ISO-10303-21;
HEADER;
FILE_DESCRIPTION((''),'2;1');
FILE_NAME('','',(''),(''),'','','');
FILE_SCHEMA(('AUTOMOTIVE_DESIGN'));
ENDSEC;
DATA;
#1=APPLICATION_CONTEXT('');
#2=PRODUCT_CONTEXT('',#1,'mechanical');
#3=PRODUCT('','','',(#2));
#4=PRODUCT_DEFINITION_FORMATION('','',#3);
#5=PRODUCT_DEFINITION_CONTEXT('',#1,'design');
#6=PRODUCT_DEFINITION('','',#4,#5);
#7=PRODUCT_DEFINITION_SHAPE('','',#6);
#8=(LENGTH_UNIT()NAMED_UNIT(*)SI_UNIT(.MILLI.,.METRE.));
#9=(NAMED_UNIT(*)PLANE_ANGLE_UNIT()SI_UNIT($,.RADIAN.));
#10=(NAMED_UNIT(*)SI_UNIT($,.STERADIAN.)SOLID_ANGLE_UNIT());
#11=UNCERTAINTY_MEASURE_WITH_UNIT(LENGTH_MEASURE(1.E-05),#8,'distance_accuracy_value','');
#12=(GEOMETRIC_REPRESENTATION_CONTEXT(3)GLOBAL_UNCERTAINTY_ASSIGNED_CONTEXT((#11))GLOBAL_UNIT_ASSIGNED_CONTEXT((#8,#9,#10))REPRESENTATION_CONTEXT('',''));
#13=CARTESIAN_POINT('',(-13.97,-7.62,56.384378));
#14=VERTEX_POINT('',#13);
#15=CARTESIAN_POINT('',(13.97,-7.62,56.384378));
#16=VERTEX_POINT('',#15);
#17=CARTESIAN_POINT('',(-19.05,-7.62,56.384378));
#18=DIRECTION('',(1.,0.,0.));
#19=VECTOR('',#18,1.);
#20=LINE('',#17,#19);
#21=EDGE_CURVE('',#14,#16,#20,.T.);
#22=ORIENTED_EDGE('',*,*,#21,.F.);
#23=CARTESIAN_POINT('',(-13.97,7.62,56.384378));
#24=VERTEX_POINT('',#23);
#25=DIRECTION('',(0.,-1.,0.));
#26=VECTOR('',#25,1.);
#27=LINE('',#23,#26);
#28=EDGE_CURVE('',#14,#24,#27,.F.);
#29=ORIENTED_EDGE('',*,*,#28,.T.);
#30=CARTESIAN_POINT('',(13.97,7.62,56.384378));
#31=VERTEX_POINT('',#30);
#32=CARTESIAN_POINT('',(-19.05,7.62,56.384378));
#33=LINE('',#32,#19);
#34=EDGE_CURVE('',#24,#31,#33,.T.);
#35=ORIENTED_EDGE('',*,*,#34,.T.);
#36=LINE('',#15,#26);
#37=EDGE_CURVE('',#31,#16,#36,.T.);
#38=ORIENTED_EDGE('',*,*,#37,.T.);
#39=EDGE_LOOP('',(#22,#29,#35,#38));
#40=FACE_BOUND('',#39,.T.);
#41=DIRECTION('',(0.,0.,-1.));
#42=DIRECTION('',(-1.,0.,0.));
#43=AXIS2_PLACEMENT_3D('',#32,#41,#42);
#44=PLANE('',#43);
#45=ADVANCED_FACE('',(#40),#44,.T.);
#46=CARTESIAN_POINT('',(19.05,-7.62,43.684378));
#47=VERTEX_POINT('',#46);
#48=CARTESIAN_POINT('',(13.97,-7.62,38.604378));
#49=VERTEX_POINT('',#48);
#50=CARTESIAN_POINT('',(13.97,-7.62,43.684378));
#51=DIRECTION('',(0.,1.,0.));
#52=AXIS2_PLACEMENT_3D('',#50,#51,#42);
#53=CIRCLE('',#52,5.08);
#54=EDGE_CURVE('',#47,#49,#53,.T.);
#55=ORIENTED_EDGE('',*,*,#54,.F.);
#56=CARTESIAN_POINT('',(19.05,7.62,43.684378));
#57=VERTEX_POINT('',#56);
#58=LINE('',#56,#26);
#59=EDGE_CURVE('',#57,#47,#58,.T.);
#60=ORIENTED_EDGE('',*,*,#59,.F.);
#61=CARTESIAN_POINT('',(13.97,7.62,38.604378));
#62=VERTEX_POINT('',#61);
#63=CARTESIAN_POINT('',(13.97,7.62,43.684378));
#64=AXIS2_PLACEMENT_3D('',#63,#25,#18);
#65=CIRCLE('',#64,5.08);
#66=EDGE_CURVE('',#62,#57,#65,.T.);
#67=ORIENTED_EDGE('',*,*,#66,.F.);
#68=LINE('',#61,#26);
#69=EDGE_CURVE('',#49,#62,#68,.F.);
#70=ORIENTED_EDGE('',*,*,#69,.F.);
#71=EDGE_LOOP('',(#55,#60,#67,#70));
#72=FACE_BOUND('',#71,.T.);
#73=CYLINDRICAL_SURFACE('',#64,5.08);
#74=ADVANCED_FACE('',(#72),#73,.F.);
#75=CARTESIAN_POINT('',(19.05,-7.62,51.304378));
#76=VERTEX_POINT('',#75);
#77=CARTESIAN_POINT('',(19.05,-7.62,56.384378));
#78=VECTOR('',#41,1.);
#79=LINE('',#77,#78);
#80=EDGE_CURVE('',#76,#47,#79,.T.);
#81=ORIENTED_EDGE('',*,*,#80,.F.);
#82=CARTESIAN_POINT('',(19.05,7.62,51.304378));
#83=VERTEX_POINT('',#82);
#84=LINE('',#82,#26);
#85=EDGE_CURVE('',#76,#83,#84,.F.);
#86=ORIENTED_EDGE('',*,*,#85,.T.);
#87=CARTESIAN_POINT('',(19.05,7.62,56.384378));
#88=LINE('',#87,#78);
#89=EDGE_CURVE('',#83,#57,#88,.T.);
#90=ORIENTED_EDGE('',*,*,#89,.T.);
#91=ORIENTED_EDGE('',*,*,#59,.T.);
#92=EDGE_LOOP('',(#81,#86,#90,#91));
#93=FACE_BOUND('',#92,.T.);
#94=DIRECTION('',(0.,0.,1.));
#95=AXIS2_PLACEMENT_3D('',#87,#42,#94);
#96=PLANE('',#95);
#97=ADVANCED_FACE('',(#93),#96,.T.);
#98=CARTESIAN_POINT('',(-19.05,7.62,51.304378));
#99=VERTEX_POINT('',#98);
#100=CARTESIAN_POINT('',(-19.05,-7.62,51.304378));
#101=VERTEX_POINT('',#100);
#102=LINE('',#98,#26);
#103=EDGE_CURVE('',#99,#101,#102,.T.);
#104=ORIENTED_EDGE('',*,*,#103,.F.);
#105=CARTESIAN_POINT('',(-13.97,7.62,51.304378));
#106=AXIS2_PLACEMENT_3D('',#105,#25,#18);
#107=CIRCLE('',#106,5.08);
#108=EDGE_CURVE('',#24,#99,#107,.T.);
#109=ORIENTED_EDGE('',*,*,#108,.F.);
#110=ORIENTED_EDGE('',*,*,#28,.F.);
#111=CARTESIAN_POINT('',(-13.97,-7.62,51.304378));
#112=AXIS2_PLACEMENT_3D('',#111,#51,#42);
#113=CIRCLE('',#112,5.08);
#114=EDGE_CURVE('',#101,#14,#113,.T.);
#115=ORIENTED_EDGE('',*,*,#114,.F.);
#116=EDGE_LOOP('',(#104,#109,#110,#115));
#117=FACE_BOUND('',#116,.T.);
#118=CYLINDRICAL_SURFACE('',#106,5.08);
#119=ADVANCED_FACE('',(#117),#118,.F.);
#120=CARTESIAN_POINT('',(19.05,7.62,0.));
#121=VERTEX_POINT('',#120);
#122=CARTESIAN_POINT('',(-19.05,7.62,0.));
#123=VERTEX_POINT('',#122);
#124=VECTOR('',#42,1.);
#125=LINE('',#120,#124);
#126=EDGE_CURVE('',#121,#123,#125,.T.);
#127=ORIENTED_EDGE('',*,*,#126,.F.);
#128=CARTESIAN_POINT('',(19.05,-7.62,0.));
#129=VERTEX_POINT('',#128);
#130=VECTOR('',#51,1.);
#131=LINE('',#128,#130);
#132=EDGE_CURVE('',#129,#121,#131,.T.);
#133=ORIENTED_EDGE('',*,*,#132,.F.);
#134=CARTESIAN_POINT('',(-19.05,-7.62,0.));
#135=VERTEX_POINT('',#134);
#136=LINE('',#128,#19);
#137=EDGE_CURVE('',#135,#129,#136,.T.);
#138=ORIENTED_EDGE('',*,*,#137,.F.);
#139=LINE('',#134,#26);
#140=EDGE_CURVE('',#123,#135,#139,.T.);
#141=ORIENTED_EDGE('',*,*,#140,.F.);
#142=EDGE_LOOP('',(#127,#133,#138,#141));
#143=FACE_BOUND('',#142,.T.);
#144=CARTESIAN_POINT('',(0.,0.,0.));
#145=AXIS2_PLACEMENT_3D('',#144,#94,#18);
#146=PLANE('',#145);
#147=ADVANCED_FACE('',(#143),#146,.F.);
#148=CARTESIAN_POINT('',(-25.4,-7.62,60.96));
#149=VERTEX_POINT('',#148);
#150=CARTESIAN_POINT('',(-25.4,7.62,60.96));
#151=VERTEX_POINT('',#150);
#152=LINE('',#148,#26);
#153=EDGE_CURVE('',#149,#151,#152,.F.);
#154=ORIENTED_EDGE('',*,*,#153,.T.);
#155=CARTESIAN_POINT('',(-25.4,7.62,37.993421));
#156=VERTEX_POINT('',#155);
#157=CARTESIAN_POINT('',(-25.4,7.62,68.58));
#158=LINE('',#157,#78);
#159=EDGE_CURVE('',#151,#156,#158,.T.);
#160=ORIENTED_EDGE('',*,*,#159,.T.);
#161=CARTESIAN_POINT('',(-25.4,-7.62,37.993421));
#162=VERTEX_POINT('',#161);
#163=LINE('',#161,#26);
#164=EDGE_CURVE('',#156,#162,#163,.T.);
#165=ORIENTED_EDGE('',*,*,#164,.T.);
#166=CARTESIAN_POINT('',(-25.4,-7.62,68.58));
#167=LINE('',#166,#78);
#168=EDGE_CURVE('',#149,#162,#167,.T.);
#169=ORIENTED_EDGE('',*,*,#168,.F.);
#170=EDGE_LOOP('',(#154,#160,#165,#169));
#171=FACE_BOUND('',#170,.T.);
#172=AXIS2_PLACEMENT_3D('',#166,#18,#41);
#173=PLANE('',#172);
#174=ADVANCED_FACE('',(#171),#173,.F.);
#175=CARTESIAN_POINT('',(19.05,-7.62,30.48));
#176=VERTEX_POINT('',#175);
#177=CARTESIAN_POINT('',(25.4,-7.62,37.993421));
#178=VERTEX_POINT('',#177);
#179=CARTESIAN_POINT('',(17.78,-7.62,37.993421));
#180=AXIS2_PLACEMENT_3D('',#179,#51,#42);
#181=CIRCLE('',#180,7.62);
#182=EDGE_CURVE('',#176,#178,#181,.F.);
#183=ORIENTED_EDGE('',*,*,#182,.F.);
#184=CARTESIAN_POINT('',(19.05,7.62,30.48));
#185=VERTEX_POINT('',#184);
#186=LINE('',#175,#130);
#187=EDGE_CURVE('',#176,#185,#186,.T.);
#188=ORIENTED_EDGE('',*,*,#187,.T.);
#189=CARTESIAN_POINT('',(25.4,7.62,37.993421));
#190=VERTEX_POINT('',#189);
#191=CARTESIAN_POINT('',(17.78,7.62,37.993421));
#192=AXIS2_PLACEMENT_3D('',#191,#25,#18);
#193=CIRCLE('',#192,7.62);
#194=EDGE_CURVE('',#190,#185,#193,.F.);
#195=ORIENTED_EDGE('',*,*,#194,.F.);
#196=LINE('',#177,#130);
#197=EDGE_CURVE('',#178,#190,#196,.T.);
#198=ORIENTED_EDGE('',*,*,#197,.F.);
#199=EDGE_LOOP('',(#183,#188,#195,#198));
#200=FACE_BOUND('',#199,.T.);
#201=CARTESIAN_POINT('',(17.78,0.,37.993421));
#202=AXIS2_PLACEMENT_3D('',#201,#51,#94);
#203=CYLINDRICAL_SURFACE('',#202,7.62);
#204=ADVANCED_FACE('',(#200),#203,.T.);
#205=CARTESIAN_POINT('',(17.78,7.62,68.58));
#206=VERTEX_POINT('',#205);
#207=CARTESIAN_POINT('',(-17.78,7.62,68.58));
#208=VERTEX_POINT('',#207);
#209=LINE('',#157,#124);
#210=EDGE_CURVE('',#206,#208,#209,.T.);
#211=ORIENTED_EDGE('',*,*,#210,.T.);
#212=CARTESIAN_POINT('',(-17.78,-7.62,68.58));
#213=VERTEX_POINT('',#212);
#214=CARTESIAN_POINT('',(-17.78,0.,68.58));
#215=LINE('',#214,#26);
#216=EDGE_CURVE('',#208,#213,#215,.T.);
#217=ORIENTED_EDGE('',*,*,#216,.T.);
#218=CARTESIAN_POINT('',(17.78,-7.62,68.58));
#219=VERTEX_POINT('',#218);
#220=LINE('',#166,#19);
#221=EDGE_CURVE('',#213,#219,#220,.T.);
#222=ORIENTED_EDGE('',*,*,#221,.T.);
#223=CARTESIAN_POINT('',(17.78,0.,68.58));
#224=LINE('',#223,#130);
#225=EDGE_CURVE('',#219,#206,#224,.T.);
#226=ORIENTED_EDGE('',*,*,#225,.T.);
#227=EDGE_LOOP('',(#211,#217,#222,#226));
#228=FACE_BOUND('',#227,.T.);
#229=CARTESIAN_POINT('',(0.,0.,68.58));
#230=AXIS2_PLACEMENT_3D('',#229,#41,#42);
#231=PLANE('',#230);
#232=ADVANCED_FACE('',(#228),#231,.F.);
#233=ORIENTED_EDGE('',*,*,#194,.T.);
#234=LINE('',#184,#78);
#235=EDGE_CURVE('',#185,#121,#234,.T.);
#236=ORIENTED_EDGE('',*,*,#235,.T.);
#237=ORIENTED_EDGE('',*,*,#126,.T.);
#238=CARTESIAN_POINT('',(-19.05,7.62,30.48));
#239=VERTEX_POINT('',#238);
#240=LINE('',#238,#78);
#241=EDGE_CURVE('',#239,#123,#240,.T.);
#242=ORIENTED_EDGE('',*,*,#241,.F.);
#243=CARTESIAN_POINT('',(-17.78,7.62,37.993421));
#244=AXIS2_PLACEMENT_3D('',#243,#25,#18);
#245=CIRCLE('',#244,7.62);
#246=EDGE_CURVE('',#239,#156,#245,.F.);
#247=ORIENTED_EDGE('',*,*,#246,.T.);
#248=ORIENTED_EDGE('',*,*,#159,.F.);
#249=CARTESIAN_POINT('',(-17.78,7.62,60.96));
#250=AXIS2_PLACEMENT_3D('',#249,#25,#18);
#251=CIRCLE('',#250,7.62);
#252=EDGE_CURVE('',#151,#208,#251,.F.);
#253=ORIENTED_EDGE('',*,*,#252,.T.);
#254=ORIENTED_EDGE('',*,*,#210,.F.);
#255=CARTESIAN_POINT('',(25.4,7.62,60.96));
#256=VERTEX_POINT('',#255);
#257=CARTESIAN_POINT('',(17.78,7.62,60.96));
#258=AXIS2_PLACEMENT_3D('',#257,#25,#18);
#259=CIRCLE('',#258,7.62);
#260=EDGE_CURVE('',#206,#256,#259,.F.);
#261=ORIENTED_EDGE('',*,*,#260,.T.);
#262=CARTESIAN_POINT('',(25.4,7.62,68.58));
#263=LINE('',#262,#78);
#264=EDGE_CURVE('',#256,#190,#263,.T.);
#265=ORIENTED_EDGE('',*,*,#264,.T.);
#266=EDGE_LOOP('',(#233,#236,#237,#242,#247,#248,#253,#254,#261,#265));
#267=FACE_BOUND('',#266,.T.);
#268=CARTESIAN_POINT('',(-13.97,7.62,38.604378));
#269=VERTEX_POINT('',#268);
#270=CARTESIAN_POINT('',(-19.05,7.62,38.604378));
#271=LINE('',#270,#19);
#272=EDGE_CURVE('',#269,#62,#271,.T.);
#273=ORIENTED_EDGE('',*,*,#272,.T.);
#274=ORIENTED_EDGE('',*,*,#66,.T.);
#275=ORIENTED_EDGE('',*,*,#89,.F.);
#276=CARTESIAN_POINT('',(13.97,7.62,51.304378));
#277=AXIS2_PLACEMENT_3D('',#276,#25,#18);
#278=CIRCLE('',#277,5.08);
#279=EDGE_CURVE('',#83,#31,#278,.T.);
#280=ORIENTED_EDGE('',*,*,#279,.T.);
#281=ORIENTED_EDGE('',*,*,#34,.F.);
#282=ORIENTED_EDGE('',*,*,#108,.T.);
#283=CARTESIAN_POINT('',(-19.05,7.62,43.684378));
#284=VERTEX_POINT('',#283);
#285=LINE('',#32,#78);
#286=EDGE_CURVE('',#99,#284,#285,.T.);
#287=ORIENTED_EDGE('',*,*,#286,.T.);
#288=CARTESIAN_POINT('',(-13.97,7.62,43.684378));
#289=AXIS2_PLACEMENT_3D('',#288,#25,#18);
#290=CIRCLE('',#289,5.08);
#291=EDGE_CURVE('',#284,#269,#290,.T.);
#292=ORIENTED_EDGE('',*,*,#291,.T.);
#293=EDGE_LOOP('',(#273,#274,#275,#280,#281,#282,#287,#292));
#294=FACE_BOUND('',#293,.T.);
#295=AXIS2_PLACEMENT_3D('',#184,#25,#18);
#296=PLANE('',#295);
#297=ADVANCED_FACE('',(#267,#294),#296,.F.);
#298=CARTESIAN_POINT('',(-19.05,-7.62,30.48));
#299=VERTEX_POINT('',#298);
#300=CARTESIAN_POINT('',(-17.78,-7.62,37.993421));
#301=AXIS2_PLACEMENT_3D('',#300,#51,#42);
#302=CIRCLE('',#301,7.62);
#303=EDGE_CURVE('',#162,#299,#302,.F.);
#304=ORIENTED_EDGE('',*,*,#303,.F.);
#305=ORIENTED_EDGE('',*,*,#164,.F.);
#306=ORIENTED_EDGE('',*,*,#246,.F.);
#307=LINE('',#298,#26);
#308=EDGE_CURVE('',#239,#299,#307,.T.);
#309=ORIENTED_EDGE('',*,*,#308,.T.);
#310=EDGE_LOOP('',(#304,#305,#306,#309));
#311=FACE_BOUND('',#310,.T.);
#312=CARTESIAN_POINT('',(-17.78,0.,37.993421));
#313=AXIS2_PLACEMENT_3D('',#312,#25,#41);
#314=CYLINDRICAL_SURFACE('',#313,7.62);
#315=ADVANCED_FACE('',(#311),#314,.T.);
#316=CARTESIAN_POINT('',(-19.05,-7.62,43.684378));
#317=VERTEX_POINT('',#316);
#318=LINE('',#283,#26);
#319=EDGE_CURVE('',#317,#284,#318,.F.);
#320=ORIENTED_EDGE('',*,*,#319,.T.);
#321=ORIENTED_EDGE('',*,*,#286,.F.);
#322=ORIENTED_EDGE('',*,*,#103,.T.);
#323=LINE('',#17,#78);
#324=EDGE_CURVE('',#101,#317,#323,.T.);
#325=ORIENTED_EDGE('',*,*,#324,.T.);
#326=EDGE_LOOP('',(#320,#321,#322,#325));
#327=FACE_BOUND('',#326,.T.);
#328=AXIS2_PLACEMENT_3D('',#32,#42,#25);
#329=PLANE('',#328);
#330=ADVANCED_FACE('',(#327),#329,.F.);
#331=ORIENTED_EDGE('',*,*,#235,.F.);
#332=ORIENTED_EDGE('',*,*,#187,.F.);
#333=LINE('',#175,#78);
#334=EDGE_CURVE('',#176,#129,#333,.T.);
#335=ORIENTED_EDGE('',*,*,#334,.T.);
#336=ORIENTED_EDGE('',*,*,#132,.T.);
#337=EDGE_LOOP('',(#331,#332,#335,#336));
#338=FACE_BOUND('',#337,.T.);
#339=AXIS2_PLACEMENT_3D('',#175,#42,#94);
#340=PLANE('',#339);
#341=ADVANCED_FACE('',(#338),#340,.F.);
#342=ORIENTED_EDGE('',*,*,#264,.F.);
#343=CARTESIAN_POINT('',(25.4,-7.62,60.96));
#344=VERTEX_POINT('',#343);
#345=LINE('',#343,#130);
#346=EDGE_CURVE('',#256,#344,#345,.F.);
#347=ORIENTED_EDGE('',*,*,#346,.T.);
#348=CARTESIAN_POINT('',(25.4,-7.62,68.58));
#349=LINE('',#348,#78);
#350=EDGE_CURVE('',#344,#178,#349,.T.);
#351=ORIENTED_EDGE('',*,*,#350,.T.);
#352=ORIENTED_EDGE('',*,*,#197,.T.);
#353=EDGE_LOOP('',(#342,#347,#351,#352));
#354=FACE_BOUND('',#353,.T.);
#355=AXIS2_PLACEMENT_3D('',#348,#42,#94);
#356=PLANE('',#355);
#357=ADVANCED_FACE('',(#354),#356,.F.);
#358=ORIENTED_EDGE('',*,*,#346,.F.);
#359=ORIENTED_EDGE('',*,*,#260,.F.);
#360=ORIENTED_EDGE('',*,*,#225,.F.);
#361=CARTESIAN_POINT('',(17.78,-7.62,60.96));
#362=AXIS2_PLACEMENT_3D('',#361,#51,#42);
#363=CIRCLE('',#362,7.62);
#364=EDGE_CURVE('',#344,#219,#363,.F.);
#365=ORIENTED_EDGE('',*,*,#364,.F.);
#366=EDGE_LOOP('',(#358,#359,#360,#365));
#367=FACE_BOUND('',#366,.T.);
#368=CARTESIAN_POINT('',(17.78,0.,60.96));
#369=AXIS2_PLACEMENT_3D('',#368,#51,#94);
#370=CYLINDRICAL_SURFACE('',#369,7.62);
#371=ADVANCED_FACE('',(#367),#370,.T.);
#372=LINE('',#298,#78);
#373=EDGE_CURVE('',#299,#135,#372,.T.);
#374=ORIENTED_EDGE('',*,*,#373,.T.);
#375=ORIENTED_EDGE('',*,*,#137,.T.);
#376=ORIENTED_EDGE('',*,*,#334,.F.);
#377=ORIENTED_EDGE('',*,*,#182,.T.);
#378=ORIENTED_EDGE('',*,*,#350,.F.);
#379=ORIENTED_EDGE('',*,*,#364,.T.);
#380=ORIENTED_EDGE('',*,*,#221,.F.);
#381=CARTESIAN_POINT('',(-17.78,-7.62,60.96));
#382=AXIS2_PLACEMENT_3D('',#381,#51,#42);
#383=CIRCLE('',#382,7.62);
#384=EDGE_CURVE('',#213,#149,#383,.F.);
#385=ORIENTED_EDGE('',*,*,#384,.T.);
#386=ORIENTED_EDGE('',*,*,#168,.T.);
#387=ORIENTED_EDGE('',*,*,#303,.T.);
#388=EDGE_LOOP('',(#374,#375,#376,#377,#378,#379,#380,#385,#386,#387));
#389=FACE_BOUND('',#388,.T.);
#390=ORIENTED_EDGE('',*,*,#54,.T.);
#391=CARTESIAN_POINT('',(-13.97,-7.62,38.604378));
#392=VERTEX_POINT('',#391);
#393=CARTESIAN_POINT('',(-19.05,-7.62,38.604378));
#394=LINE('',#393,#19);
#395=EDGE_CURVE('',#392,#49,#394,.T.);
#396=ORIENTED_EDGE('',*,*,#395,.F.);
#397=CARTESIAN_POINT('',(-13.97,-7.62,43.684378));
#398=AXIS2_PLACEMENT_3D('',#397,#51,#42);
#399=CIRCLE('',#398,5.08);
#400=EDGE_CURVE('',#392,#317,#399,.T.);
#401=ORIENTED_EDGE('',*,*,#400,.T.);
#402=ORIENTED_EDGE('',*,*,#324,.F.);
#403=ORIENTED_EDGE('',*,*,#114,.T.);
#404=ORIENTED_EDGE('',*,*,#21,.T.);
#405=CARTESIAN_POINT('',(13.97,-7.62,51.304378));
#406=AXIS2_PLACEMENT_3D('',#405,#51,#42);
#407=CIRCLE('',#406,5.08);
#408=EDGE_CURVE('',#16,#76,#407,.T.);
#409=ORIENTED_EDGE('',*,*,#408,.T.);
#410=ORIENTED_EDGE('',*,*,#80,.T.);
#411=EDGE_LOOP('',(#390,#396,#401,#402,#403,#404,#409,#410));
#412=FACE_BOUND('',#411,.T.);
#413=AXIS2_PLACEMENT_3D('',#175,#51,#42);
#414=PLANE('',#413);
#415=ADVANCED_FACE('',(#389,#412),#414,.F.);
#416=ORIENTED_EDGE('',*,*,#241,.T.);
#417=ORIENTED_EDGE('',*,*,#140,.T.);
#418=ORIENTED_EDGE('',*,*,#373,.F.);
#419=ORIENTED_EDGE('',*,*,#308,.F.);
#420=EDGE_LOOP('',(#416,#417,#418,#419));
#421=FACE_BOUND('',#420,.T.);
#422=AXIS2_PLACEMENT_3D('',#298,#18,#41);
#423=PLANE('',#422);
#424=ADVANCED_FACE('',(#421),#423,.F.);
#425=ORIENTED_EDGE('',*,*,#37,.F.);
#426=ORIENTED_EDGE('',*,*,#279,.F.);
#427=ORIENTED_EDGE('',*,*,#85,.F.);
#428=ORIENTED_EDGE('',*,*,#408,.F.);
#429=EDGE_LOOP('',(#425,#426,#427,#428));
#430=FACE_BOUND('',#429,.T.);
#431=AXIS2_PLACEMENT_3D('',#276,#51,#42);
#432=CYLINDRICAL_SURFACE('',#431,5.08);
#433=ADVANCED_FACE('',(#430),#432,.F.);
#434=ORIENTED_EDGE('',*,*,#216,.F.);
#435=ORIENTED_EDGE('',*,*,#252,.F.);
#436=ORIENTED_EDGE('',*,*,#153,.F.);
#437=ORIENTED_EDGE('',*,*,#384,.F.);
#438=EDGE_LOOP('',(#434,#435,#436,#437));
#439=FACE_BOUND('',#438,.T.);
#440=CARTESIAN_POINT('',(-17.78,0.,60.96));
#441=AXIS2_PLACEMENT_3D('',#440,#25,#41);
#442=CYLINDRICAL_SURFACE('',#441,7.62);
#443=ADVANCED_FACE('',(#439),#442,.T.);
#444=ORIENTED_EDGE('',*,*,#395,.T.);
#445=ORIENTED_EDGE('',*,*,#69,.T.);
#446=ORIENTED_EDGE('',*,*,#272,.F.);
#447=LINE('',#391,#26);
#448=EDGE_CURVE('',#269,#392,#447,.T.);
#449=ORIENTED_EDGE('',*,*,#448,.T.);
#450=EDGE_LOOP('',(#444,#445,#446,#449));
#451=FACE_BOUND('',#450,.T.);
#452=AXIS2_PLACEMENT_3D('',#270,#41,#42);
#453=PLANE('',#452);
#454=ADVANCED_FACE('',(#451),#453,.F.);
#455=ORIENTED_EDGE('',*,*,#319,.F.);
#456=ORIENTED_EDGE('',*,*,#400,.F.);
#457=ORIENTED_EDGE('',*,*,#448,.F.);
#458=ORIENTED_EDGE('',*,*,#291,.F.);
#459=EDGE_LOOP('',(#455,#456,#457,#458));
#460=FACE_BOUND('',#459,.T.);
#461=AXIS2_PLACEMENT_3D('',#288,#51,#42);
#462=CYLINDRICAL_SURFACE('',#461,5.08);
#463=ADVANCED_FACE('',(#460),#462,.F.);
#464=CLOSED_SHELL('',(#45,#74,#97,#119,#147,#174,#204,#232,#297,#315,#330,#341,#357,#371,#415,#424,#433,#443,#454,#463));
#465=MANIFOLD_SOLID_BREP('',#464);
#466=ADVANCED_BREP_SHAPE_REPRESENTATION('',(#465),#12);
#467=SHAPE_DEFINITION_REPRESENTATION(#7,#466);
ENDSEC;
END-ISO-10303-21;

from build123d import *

# Parameters (mm, degrees)
SKETCH1_W           = 38.1
SKETCH1_H           = 15.24
BOSS_EXTRUDE2_DEPTH = 30.48
SKETCH2_W           = 50.8
SKETCH2_H           = 15.24
BOSS_EXTRUDE3_DEPTH = 38.1
SKETCH3_W           = 38.1
SKETCH3_H           = 17.78
CUT_EXTRUDE1_DEPTH  = 75.703641143
FILLET1_R           = 5.08
FILLET2_R           = 7.62


with BuildPart() as part:
    # Sketch1 → Boss-Extrude2 (new body)
    with BuildSketch(Plane.XY):
        Rectangle(SKETCH1_W, SKETCH1_H)
    extrude(amount=BOSS_EXTRUDE2_DEPTH)

    # Sketch2 → Boss-Extrude3 (add)
    with BuildSketch(Plane.XY.offset(30.48)):
        Rectangle(SKETCH2_W, SKETCH2_H)
    extrude(amount=BOSS_EXTRUDE3_DEPTH)

    # Sketch3 → Cut-Extrude1 (cut, through all)
    with BuildSketch(Plane.XZ.offset(7.62)):
        with Locations((0, 47.494377682)):
            Rectangle(SKETCH3_W, SKETCH3_H)
    extrude(amount=-CUT_EXTRUDE1_DEPTH, mode=Mode.SUBTRACT)

    # Fillet1
    fillet1_edges = [part.edges().sort_by_distance(p)[0] for p in [
        (-19.05, 0, 38.604377682),
        (-19.05, 0, 56.384377682),
        (19.05, 0, 56.384377682),
        (19.05, 0, 38.604377682),
    ]]
    fillet(fillet1_edges, radius=FILLET1_R)

    # Fillet2
    # the kernel refuses this fillet: 7.62 mm, written as the material it takes off along each edge
    with BuildSketch(Plane(origin=(-25.4, 26.403553311, 30.48), x_dir=(0, 0, 1), z_dir=(0, -1, 0)), Plane(origin=(25.4, -26.403553311, 30.48), x_dir=(0, 0, 1), z_dir=(0, 1, 0))) as fillet2_piece_1:
        with BuildLine():
            CenterArc((7.513421325, -7.62), FILLET2_R, 90, 80.405931773)
            Line((0, -6.35), (-0.150268426, -6.3246))
            ThreePointArc((-0.150268426, -6.3246), (-0.1524, -3.175), (-0.1524, 0))
            Line((-0.1524, 0), (0, 0.1524))
            Line((0, 0.1524), (7.513421325, 0.1524))
            Line((7.513421325, 0.1524), (7.513421325, 0))
        make_face()
    extrude(amount=52.807106623, mode=Mode.SUBTRACT)
    with BuildSketch(Plane(origin=(25.4, -26.67, 68.58), x_dir=(-1, 0, 0), z_dir=(0, 1, 0))) as fillet2_piece_2:
        with BuildLine():
            CenterArc((FILLET2_R, -FILLET2_R), FILLET2_R, 90, 90)
            Line((0, -FILLET2_R), (-FILLET2_R * 0.02, -FILLET2_R))
            Line((-FILLET2_R * 0.02, -FILLET2_R), (-FILLET2_R * 0.02, FILLET2_R * 0.02))
            Line((-FILLET2_R * 0.02, FILLET2_R * 0.02), (FILLET2_R, FILLET2_R * 0.02))
            Line((FILLET2_R, FILLET2_R * 0.02), (FILLET2_R, 0))
        make_face()
    extrude(amount=53.34, mode=Mode.SUBTRACT)
    with BuildSketch(Plane(origin=(-25.4, 26.67, 68.58), x_dir=(0, 0, -1), z_dir=(0, -1, 0))) as fillet2_piece_3:
        with BuildLine():
            CenterArc((FILLET2_R, FILLET2_R), FILLET2_R, 180, 90)
            Line((0, FILLET2_R), (-FILLET2_R * 0.02, FILLET2_R))
            Line((-FILLET2_R * 0.02, FILLET2_R), (-FILLET2_R * 0.02, -FILLET2_R * 0.02))
            Line((-FILLET2_R * 0.02, -FILLET2_R * 0.02), (FILLET2_R, -FILLET2_R * 0.02))
            Line((FILLET2_R, -FILLET2_R * 0.02), (FILLET2_R, 0))
        make_face()
    extrude(amount=53.34, mode=Mode.SUBTRACT)


solid = part.part
